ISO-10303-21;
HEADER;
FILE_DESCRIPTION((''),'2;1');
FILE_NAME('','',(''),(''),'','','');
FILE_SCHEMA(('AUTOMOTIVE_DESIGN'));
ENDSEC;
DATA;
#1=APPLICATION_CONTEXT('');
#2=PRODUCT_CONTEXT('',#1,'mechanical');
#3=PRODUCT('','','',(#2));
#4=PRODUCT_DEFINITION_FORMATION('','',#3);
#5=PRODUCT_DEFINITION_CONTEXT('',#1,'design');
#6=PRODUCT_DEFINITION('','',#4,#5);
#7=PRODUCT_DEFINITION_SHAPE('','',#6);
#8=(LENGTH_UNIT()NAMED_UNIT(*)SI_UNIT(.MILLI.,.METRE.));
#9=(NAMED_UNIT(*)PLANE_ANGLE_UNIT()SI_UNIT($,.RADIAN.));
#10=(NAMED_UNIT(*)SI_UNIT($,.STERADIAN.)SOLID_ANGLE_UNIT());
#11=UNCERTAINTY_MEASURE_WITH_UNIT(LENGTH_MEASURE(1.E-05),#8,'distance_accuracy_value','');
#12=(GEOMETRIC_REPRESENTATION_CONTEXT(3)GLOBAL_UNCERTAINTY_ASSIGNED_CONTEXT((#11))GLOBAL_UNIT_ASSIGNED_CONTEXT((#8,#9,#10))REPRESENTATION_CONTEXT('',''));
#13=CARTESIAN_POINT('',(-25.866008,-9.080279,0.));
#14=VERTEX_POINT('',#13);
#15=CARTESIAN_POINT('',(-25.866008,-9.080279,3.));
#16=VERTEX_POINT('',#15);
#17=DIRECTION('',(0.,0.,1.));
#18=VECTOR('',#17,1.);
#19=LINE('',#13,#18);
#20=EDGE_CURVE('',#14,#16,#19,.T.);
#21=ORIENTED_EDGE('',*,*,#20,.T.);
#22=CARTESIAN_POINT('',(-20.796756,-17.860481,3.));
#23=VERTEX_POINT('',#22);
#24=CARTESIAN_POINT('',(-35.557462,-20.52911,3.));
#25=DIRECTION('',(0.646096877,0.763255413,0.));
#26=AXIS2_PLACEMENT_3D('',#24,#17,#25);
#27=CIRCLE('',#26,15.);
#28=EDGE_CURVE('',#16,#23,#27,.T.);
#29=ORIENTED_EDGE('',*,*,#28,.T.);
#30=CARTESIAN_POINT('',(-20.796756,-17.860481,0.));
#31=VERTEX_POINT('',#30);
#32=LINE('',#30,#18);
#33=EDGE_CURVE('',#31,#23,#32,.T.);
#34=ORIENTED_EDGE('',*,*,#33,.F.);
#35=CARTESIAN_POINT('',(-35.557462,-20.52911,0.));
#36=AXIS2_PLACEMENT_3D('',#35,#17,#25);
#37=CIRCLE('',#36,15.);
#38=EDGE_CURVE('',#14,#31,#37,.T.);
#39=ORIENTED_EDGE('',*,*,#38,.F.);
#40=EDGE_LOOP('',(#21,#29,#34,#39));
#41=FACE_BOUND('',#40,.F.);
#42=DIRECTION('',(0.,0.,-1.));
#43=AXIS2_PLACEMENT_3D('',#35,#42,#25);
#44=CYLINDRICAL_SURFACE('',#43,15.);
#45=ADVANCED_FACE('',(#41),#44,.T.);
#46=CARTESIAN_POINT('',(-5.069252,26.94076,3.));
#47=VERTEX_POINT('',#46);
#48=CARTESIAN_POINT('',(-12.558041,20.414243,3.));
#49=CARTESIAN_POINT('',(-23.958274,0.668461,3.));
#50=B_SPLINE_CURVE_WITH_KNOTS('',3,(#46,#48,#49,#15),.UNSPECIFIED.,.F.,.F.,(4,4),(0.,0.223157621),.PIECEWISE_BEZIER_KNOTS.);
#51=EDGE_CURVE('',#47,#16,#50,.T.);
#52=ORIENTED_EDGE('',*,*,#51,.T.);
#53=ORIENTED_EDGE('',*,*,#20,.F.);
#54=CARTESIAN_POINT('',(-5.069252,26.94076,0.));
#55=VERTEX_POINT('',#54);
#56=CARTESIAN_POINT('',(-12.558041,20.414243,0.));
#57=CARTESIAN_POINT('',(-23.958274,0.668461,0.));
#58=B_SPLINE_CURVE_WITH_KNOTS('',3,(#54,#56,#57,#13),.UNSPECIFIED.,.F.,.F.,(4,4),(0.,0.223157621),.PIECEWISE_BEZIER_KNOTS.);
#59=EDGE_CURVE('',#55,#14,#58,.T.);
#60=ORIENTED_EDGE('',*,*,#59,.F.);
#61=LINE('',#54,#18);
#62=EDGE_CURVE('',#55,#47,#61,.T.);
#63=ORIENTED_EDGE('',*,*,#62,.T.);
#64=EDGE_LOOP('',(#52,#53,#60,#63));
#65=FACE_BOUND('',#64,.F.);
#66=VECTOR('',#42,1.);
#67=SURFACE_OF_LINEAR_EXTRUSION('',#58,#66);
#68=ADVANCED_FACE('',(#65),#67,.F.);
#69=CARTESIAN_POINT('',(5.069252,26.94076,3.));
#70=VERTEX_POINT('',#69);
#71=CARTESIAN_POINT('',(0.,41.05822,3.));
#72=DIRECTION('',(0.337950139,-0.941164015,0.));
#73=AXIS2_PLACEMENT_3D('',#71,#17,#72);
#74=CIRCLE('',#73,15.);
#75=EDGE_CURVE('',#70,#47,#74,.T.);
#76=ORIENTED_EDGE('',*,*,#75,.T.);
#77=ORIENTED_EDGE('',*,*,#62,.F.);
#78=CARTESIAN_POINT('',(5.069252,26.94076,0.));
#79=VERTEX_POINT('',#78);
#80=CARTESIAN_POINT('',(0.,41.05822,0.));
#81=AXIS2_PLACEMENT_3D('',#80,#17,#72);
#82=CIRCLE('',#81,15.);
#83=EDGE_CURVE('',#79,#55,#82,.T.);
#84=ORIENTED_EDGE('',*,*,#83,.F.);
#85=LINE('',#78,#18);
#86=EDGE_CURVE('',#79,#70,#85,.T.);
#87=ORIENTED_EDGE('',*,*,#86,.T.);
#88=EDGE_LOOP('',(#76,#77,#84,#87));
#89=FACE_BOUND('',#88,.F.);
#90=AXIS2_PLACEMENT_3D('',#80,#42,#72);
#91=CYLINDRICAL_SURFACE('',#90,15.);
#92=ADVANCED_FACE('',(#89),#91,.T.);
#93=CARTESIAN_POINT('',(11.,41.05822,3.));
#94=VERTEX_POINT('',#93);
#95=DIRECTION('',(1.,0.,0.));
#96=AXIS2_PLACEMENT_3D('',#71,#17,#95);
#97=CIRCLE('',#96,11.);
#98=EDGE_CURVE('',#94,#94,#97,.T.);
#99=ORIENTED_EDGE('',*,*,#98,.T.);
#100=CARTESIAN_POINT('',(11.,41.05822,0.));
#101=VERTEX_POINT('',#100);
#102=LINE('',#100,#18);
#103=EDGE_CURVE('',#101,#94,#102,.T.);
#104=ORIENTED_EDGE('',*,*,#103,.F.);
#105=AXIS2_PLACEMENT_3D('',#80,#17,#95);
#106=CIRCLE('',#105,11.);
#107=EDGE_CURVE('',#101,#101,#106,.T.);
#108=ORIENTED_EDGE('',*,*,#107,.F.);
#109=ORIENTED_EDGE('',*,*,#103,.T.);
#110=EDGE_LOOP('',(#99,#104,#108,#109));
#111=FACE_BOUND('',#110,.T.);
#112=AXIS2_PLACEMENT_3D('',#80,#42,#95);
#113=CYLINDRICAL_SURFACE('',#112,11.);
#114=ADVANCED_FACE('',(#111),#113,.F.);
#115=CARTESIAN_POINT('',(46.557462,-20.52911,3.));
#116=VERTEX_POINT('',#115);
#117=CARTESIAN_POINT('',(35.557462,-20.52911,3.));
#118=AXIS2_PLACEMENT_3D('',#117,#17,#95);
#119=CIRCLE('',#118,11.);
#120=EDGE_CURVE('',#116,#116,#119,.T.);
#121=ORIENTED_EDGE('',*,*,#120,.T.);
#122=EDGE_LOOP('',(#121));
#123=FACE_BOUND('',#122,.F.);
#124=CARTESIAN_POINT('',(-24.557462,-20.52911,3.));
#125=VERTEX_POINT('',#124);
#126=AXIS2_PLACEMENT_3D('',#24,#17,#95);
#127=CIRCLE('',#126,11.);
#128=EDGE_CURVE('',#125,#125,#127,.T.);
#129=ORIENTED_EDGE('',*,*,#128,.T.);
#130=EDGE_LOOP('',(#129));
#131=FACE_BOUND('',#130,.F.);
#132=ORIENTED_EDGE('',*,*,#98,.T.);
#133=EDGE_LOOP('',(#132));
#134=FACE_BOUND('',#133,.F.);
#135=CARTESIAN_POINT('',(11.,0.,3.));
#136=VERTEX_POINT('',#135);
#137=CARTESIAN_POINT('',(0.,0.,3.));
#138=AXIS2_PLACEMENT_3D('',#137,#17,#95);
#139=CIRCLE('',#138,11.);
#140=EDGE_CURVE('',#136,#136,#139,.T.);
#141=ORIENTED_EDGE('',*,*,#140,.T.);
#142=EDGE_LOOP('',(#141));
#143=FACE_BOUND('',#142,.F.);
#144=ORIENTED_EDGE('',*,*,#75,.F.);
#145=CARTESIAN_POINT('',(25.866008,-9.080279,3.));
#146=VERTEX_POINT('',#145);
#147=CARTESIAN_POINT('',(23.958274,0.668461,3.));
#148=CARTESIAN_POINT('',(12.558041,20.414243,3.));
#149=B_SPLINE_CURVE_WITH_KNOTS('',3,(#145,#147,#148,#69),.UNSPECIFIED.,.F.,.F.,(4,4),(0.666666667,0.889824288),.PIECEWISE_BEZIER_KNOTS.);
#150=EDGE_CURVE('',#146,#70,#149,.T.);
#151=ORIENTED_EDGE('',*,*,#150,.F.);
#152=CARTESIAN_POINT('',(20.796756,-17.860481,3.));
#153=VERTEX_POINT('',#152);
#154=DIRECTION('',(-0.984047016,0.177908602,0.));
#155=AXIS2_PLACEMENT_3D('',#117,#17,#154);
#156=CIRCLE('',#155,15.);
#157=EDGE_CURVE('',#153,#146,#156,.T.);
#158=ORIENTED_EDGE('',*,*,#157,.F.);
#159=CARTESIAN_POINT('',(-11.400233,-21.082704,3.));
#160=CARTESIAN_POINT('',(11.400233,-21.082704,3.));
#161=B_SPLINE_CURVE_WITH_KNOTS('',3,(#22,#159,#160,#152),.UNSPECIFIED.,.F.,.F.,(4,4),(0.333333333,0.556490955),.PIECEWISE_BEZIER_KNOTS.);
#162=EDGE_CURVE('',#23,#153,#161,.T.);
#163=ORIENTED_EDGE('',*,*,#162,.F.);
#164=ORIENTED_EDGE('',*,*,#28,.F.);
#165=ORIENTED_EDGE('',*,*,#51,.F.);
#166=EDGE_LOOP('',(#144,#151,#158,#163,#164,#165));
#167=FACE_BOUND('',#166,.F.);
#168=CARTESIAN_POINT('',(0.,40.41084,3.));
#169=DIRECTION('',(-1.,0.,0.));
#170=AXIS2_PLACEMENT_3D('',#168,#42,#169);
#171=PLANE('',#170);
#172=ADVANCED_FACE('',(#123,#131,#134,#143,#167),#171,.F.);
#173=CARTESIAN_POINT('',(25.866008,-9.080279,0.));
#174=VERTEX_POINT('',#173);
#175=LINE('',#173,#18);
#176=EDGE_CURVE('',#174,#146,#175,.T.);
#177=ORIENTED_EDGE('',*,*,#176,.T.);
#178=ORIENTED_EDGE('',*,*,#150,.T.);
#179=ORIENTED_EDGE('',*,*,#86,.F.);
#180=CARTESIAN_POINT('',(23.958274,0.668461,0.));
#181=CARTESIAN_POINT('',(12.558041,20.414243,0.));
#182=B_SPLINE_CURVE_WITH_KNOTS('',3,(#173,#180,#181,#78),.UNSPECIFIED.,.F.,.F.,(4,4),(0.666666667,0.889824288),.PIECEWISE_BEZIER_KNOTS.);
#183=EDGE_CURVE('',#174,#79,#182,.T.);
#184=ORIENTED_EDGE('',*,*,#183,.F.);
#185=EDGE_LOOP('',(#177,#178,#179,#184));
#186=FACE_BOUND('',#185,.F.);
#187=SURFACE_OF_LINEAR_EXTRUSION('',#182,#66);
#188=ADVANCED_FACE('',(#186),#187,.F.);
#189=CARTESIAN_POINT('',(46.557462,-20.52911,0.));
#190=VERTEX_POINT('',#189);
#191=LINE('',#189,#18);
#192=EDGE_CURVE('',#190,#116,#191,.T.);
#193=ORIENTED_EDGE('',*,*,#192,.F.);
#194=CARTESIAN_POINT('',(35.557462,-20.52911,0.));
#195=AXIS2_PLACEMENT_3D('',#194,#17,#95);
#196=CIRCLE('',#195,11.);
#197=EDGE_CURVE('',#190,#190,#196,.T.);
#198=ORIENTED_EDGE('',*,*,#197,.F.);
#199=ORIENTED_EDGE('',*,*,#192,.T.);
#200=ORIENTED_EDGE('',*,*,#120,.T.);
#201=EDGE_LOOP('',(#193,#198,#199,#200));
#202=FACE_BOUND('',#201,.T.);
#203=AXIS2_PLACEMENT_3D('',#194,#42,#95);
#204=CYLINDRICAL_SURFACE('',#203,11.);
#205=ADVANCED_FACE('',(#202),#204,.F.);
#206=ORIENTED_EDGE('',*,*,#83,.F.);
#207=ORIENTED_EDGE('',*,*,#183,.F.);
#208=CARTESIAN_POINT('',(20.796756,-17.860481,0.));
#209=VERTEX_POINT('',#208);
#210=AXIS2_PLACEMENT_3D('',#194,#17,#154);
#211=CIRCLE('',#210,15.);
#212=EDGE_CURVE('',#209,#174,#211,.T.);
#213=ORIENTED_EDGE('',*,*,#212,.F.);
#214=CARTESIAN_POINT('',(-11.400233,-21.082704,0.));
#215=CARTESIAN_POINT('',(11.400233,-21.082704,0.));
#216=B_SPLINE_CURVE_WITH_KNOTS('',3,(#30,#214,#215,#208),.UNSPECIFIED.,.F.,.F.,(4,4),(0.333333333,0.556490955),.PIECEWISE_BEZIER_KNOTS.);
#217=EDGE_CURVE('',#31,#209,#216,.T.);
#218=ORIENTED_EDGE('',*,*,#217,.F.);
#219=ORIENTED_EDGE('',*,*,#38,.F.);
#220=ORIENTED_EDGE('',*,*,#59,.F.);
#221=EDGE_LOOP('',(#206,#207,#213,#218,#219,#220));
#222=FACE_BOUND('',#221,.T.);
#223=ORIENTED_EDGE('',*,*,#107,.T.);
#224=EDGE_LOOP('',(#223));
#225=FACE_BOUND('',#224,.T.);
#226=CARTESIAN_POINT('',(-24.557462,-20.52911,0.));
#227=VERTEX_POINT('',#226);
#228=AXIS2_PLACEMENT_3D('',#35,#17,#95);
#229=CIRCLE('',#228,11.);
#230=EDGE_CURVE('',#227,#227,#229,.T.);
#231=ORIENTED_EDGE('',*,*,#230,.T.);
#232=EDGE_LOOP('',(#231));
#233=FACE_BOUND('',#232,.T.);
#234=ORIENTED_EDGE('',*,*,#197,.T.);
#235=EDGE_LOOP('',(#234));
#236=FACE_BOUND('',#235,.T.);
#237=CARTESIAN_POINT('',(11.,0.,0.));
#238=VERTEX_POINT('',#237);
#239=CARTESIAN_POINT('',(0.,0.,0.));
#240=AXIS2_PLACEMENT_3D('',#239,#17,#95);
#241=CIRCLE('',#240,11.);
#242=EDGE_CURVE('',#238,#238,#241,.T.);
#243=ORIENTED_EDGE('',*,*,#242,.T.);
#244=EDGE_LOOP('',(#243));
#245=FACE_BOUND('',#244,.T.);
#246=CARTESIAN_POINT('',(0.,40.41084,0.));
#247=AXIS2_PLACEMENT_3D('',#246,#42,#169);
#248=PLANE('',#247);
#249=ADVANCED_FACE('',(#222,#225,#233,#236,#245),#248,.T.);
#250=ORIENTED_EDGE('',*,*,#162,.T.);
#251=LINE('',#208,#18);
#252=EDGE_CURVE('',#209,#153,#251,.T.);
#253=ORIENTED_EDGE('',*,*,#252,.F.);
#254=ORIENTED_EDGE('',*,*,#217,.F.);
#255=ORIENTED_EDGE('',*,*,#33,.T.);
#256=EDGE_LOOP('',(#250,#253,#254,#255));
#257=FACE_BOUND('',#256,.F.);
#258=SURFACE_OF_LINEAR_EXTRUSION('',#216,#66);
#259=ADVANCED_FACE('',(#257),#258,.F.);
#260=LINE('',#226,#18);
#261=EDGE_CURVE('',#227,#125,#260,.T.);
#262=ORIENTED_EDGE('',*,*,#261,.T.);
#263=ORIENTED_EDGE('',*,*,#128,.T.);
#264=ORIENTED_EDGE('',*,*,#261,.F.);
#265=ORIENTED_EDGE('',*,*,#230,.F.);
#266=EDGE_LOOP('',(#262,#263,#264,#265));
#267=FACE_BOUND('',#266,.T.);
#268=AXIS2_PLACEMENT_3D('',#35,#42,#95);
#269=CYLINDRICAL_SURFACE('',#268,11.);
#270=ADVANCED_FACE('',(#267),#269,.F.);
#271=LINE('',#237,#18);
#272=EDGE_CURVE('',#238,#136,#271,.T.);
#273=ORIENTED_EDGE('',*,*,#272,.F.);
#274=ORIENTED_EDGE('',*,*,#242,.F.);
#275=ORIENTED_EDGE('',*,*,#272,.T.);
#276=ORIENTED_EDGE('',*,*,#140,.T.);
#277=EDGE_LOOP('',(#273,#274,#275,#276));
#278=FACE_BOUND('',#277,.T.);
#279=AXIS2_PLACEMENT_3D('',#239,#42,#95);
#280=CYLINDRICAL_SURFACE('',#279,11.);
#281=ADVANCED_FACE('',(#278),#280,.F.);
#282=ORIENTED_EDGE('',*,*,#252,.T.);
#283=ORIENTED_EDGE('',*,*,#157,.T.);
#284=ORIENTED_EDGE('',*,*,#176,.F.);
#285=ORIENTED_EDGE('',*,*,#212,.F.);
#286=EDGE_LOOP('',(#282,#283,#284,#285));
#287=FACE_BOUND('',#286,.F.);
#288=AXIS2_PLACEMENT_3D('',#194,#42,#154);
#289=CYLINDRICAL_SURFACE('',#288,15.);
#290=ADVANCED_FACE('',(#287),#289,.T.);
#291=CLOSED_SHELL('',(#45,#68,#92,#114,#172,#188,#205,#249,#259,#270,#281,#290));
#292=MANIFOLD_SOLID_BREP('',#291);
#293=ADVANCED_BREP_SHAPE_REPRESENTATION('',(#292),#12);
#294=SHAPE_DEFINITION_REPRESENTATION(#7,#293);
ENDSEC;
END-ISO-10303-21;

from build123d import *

# Parameters (mm, degrees)
F0_R     = 11
F1_DEPTH = 3


with BuildPart() as f1:
    # F0 (on Top) → F1 (new body)
    with BuildSketch(Plane.XY):
        with BuildLine():
            add(Edge.make_bspline(
                [(5.0692520794, 26.9407597389), (1.3719432198, 30.1629827921), (-1.3719432198, 30.1629827921), (-5.0692520794, 26.9407597389)],
                knots=[0.8898242879, 0.8898242879, 0.8898242879, 0.8898242879, 1, 1, 1, 1], degree=3))
            ThreePointArc((5.0692520794, 26.9407597389), (0, 56.0582199693), (-5.0692520794, 26.9407597389))
        make_face()
        with Locations((0, 41.0582199693)):
            Circle(F0_R, mode=Mode.SUBTRACT)
        with BuildLine():
            add(Edge.make_bspline(
                [(25.8660083708, -9.0802787905), (23.9582735086, 0.6684610246), (12.5580409831, 20.414242977), (5.0692520794, 26.9407597389)],
                knots=[0.6666666667, 0.6666666667, 0.6666666667, 0.6666666667, 0.8898242879, 0.8898242879, 0.8898242879, 0.8898242879], degree=3))
            add(Edge.make_bspline(
                [(5.0692520794, 26.9407597389), (1.3719432198, 30.1629827921), (-1.3719432198, 30.1629827921), (-5.0692520794, 26.9407597389)],
                knots=[0.8898242879, 0.8898242879, 0.8898242879, 0.8898242879, 1, 1, 1, 1], degree=3))
            add(Edge.make_bspline(
                [(-5.0692520794, 26.9407597389), (-12.5580409831, 20.414242977), (-23.9582735086, 0.6684610246), (-25.8660083708, -9.0802787905)],
                knots=[0, 0, 0, 0, 0.2231576212, 0.2231576212, 0.2231576212, 0.2231576212], degree=3))
            add(Edge.make_bspline(
                [(-25.8660083708, -9.0802787905), (-26.8078809618, -13.8933537152), (-25.435937742, -16.2696290769), (-20.7967562915, -17.8604809484)],
                knots=[0.2231576212, 0.2231576212, 0.2231576212, 0.2231576212, 0.3333333333, 0.3333333333, 0.3333333333, 0.3333333333], degree=3))
            add(Edge.make_bspline(
                [(-20.7967562915, -17.8604809484), (-11.4002325256, -21.0827040016), (11.4002325256, -21.0827040016), (20.7967562915, -17.8604809484)],
                knots=[0.3333333333, 0.3333333333, 0.3333333333, 0.3333333333, 0.5564909546, 0.5564909546, 0.5564909546, 0.5564909546], degree=3))
            add(Edge.make_bspline(
                [(20.7967562915, -17.8604809484), (25.435937742, -16.2696290769), (26.8078809618, -13.8933537152), (25.8660083708, -9.0802787905)],
                knots=[0.5564909546, 0.5564909546, 0.5564909546, 0.5564909546, 0.6666666667, 0.6666666667, 0.6666666667, 0.6666666667], degree=3))
        make_face()
        Circle(F0_R, mode=Mode.SUBTRACT)
        with BuildLine():
            ThreePointArc((20.7967562915, -17.8604809484), (48.5478425843, -28.0291099846), (25.8660083708, -9.0802787905))
            add(Edge.make_bspline(
                [(20.7967562915, -17.8604809484), (25.435937742, -16.2696290769), (26.8078809618, -13.8933537152), (25.8660083708, -9.0802787905)],
                knots=[0.5564909546, 0.5564909546, 0.5564909546, 0.5564909546, 0.6666666667, 0.6666666667, 0.6666666667, 0.6666666667], degree=3))
        make_face()
        with Locations((35.5574615276, -20.5291099846)):
            Circle(F0_R, mode=Mode.SUBTRACT)
        with BuildLine():
            add(Edge.make_bspline(
                [(-25.8660083708, -9.0802787905), (-26.8078809618, -13.8933537152), (-25.435937742, -16.2696290769), (-20.7967562915, -17.8604809484)],
                knots=[0.2231576212, 0.2231576212, 0.2231576212, 0.2231576212, 0.3333333333, 0.3333333333, 0.3333333333, 0.3333333333], degree=3))
            ThreePointArc((-25.8660083708, -9.0802787905), (-48.5478425843, -28.0291099846), (-20.7967562915, -17.8604809484))
        make_face()
        with Locations((-35.5574615276, -20.5291099846)):
            Circle(F0_R, mode=Mode.SUBTRACT)
    extrude(amount=F1_DEPTH)


solid = f1.part
